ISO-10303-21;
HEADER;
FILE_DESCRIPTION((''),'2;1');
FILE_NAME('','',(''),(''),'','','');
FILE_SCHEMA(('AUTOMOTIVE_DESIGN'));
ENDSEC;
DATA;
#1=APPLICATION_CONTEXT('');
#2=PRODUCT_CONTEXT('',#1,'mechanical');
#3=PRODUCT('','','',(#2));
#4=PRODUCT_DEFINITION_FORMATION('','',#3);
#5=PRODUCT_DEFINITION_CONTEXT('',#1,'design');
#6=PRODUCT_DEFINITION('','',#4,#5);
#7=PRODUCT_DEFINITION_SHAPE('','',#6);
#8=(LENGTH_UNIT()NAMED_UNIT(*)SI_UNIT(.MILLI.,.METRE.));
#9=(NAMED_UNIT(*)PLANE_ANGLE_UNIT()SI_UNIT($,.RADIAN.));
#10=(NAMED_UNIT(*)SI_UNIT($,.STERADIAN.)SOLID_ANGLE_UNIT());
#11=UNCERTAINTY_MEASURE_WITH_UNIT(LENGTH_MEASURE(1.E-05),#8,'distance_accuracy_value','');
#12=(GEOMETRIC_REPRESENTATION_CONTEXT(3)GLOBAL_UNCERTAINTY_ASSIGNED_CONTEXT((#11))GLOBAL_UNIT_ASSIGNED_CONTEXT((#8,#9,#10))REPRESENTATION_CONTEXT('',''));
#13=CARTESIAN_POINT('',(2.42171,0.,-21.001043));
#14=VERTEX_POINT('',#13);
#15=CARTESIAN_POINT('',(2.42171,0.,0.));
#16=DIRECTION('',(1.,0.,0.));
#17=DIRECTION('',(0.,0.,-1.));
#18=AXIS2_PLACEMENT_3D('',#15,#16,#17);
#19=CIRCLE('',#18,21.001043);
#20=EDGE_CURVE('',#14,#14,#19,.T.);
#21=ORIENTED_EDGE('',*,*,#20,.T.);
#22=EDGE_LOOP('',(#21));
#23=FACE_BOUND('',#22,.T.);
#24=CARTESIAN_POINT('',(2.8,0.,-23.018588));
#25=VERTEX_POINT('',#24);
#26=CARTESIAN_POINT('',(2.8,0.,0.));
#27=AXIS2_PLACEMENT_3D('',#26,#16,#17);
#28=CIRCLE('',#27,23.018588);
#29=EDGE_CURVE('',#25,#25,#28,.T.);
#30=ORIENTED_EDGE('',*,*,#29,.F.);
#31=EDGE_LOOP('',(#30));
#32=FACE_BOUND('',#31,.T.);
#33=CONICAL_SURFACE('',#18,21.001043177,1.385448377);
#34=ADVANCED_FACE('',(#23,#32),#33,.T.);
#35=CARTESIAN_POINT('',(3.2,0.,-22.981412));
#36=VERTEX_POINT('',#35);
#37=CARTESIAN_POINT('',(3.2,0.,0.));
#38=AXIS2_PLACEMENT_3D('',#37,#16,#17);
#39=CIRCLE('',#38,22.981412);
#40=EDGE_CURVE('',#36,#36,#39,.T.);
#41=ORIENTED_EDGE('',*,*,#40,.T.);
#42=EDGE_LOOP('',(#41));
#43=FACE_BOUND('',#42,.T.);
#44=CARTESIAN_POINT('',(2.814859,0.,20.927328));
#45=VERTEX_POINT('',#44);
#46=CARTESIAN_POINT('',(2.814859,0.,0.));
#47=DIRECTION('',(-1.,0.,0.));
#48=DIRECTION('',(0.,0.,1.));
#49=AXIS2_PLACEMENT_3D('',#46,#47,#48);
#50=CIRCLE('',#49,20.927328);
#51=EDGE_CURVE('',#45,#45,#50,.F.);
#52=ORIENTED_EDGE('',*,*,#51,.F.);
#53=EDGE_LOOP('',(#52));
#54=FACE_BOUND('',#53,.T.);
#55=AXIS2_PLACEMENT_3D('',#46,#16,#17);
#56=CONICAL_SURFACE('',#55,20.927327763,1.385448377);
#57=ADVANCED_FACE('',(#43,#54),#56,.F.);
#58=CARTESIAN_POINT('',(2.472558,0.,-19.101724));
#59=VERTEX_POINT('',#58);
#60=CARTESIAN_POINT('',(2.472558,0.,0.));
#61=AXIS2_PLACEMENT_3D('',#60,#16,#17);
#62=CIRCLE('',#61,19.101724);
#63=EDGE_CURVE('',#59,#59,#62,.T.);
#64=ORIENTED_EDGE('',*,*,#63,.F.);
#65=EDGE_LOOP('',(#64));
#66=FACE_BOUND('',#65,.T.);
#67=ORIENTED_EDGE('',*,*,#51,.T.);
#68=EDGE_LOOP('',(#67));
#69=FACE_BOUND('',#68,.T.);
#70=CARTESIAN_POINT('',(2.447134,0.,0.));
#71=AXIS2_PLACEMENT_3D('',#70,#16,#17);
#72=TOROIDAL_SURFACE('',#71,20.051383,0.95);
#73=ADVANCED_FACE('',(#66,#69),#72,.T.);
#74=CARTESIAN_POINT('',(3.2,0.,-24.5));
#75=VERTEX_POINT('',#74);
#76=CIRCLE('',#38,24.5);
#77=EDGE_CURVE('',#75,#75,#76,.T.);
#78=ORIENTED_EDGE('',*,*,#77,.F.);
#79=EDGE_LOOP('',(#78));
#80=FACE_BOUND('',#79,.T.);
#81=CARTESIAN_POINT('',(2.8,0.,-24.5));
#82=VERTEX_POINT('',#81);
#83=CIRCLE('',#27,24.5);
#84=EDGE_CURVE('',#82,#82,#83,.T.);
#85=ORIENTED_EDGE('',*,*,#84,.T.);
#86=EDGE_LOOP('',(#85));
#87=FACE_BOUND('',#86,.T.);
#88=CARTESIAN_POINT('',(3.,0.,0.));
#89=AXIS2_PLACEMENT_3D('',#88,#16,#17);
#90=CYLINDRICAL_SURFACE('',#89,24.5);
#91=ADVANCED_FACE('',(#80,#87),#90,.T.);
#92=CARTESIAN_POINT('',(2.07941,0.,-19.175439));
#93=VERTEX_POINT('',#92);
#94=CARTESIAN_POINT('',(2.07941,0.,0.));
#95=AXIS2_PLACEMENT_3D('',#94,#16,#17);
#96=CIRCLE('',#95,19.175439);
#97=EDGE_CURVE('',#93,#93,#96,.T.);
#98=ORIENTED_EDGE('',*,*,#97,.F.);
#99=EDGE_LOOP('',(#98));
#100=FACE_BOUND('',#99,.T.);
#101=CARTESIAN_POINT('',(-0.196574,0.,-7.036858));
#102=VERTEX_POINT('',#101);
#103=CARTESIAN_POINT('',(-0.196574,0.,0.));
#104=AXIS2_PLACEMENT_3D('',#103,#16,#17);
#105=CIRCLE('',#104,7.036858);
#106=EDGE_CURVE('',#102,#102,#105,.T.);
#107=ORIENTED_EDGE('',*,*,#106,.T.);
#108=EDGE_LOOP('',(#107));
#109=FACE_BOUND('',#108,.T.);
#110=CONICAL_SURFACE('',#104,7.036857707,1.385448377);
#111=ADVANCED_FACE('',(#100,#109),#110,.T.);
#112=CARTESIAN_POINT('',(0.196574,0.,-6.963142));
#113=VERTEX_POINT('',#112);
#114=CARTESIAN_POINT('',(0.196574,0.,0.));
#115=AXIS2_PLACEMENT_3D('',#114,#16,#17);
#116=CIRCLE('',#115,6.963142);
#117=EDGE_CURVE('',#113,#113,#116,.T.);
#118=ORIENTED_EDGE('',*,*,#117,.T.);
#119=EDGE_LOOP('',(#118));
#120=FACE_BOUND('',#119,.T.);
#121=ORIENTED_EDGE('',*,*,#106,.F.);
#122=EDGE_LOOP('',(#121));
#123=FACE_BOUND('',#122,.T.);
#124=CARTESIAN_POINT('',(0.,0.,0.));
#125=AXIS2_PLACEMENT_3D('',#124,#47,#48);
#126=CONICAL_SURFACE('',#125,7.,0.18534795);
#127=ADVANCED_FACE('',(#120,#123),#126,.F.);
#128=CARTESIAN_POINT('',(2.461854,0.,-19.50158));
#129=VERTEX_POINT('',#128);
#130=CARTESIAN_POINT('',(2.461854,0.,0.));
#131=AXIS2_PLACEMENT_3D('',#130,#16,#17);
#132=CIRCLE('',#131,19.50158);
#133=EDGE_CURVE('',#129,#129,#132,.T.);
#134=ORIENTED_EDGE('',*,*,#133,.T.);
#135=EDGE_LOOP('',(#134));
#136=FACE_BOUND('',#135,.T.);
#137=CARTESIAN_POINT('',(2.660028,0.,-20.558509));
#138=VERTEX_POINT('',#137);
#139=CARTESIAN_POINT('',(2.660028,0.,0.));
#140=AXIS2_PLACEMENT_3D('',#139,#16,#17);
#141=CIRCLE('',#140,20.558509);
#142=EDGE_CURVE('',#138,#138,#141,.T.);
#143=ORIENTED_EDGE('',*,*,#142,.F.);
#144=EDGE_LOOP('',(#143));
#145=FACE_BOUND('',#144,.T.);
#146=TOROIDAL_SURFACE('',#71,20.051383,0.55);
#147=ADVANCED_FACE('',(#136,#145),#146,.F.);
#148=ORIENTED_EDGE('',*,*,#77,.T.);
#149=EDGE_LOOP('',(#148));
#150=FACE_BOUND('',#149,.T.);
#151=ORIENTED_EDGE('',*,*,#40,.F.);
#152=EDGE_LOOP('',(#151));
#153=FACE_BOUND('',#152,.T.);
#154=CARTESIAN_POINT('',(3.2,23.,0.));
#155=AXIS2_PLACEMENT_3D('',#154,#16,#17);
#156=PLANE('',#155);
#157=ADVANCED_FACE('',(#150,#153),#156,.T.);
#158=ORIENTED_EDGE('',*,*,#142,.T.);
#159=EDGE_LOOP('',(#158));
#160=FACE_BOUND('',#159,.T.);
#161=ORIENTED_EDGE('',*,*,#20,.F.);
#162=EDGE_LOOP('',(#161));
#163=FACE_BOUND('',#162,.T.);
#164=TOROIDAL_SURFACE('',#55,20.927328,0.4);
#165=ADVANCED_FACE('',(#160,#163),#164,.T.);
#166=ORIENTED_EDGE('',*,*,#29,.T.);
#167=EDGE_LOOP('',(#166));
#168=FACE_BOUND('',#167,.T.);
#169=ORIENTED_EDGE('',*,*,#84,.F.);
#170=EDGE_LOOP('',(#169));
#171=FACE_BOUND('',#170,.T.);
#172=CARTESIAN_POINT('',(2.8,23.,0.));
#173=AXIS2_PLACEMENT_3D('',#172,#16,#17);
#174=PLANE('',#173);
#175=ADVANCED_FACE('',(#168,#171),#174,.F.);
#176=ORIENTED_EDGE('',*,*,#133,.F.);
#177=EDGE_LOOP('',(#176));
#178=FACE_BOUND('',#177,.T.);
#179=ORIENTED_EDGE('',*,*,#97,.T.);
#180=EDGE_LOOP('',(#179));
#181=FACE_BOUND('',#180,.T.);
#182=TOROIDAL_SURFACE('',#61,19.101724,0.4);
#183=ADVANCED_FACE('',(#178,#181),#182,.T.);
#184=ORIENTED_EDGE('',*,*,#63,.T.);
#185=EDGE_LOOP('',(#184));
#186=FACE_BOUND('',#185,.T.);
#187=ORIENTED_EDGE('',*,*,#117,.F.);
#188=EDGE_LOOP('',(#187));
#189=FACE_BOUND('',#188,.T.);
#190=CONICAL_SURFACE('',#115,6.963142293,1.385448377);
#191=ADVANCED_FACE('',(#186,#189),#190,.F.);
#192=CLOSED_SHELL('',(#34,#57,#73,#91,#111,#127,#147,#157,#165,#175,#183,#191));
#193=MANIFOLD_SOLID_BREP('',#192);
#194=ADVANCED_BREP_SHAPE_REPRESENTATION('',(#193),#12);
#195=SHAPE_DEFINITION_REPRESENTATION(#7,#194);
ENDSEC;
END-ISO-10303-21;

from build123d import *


with BuildPart() as part:
    # Thicken1: read off the stored shape, not the designer's step
    # Thicken1 outline → Thicken1 (revolve)
    with BuildSketch(Plane.YX):
        with BuildLine():
            Line((23.01858804, 2.8), (24.5, 2.8))
            Line((24.5, 2.8), (24.5, 3.2))
            Line((24.5, 3.2), (22.98141196, 3.2))
            Line((22.98141196, 3.2), (20.927327763, 2.814859213))
            ThreePointArc((20.927327763, 2.814859213), (19.876309331, 3.380862972), (19.101723702, 2.472558451))
            Line((19.101723702, 2.472558451), (6.963142293, 0.196574437))
            Line((6.963142293, 0.196574437), (7.036857707, -0.196574437))
            Line((7.036857707, -0.196574437), (19.175439116, 2.079409577))
            ThreePointArc((19.175439116, 2.079409577), (19.40608122, 2.213007878), (19.501580433, 2.461853586))
            ThreePointArc((19.501580433, 2.461853586), (19.950024745, 2.987714098), (20.5585091, 2.660027711))
            ThreePointArc((20.5585091, 2.660027711), (20.737669453, 2.462680671), (21.001043177, 2.421710338))
            Line((21.001043177, 2.421710338), (23.01858804, 2.8))
        make_face()
    revolve(axis=Axis((0, 0, 0), (1, 0, 0)))


solid = part.part
